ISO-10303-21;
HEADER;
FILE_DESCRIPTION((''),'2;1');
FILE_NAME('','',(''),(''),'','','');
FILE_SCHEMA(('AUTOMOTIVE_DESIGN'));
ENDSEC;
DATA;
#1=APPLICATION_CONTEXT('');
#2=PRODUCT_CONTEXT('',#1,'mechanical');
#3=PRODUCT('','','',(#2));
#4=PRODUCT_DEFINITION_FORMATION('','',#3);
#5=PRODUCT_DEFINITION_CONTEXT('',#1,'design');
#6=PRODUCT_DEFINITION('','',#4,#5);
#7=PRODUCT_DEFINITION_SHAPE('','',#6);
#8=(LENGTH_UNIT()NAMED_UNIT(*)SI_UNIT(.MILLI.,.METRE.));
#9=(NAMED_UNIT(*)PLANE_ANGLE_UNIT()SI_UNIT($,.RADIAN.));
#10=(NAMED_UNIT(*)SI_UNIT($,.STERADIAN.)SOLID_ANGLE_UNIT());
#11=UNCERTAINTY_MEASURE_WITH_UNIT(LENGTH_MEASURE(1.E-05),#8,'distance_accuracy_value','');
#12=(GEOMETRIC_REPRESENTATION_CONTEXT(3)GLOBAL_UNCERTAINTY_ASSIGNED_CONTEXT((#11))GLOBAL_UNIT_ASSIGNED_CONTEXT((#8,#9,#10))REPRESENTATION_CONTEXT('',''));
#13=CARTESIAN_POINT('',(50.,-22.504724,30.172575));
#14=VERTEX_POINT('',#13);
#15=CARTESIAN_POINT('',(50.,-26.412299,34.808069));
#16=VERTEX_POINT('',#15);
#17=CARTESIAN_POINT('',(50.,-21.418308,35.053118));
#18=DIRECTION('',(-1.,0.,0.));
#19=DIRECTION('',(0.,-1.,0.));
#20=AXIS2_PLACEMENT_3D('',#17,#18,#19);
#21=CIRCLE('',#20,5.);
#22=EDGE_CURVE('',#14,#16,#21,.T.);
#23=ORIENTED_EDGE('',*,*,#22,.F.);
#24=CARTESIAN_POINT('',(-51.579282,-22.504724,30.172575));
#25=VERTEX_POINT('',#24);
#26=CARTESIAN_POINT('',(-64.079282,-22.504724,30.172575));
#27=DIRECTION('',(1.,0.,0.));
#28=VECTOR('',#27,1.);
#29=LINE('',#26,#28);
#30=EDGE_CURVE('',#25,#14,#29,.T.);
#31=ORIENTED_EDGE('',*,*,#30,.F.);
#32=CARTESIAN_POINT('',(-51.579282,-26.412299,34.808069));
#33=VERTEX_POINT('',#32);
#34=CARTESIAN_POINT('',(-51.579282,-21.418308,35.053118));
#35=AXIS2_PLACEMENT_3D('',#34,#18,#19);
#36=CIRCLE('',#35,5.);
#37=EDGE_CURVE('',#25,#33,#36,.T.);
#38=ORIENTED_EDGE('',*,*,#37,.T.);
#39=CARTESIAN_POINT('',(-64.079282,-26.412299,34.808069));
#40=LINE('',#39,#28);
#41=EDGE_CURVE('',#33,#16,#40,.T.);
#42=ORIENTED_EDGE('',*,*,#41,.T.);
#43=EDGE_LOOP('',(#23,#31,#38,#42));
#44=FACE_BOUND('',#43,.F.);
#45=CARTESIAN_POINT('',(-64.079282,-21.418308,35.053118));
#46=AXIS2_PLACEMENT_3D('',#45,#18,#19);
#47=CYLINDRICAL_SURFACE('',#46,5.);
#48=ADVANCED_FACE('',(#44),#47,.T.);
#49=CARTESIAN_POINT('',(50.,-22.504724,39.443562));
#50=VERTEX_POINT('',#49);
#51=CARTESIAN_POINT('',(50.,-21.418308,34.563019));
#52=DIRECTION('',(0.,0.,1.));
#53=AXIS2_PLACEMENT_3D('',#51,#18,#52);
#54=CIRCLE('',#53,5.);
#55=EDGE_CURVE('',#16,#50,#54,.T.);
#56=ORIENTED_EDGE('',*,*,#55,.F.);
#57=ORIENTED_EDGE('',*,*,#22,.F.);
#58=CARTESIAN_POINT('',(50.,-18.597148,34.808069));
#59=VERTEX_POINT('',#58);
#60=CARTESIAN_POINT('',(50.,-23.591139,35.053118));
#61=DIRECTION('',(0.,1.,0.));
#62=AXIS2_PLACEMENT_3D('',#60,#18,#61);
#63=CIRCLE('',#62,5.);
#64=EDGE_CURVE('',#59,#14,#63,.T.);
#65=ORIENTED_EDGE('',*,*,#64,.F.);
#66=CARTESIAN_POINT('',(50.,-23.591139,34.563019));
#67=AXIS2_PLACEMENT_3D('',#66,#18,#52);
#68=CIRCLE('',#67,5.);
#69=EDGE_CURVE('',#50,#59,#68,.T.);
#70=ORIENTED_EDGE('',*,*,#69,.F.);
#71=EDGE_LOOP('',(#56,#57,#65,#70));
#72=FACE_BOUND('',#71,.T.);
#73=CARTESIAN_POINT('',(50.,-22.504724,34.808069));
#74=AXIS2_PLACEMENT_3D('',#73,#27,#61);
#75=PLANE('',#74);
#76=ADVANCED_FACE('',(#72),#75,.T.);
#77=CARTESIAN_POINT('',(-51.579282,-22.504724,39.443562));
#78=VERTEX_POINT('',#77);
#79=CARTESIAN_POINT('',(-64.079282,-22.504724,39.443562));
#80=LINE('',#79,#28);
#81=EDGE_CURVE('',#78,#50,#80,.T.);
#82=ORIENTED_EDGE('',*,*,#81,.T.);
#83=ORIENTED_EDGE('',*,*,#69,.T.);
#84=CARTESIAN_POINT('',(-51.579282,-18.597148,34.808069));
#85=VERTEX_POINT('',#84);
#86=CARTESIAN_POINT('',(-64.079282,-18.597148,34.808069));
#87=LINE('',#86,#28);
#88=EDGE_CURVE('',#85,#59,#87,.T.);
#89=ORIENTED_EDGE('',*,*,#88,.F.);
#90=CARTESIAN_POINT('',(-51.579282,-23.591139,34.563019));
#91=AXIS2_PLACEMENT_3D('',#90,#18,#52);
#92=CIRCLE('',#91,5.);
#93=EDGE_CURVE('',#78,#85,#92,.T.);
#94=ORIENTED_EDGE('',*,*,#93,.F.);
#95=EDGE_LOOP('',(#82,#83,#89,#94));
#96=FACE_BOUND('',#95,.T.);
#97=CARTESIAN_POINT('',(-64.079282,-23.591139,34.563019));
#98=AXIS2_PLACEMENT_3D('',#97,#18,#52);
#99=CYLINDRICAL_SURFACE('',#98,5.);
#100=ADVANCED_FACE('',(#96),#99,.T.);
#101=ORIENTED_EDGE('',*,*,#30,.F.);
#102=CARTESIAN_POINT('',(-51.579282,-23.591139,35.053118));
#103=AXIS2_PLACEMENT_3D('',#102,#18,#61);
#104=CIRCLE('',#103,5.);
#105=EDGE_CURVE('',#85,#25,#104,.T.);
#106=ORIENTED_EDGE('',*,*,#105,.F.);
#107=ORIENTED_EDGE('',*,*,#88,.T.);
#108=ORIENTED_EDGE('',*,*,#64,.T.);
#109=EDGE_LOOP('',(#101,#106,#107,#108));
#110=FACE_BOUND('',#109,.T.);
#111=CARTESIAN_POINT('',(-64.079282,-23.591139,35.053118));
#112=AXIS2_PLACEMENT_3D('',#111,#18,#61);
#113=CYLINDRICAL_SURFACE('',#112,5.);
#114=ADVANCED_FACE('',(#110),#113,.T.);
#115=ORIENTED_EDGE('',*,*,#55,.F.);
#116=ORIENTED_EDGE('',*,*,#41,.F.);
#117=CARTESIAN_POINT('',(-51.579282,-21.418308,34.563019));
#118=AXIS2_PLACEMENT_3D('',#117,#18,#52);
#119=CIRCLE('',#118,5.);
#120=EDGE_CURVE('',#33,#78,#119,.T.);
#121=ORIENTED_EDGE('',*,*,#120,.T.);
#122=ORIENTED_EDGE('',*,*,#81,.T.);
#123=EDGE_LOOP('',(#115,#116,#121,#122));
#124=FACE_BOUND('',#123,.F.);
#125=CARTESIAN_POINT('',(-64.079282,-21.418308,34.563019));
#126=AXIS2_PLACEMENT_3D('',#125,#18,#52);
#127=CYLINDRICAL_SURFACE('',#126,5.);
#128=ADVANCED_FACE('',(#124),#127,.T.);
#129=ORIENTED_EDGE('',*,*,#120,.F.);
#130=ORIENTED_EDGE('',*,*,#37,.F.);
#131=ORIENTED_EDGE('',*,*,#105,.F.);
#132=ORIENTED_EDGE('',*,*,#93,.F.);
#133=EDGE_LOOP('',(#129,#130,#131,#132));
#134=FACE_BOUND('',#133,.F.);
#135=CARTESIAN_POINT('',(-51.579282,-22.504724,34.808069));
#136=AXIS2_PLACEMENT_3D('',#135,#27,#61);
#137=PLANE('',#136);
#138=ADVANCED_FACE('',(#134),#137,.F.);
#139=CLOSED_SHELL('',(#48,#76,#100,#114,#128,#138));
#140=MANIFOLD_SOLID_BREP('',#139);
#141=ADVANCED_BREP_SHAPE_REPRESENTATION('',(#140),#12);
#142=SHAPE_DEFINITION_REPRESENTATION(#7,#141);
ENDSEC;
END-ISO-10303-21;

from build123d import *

# Parameters (mm, degrees)
F0_W        = 7.8271683306
F0_H        = 9.5099005848
F2_DEPTH    = 25
F3_DEPTH    = 25
F1_W        = 7.8271683306
F1_H        = 9.5099005848
F4_DEPTH    = 51.5792816877
F3_FACE_W   = 7.8271683306
F3_FACE_H   = 9.5099005848
F4_FACE_W   = 7.8271683306
F4_FACE_H   = 9.5099005848
F6_T1_DEPTH = 126.5792816877


# Not quite as in the source:
# - a fillet or chamfer that OpenCascade refuses, or shapes differently, is made with other operations: its cross-section is extruded or revolved along the edge and cut away or added


with BuildPart() as f2:
    # F0 (on Right) → F2 (new body)
    with BuildSketch(Plane.YZ):
        with Locations((-22.5047236308, 34.8080685362)):
            Rectangle(F0_W, F0_H)
    extrude(amount=F2_DEPTH)

    # F3 (add): a face of the model
    f3_faces = [f2.faces().sort_by_distance(p)[0] for p in [
        (25, -22.5047236308, 34.8080685362),
    ]]
    extrude(f3_faces, amount=F3_DEPTH)

    # F1 (on face) → F4 (join)
    with BuildSketch(Plane.YZ):
        with Locations((-22.5047236308, 34.8080685362)):
            Rectangle(F1_W, F1_H)
    extrude(amount=-F4_DEPTH)

    # F3_face (on face) → F5 section 0
    with BuildSketch(Plane(origin=(50, -22.5047236308, 34.8080685362), x_dir=(0, 1, 0), z_dir=(1, 0, 0))):
        Rectangle(F3_FACE_W, F3_FACE_H)
    # F4_face (on face) → F5 section 1
    with BuildSketch(Plane(origin=(-51.5792816877, -22.5047236308, 34.8080685362), x_dir=(0, 1, 0), z_dir=(-1, 0, 0))):
        Rectangle(F4_FACE_W, F4_FACE_H)
    loft()

    # F6: fillet of radius 5 on 4 edges, made by hand

    # F6_s2 → F6_t1 (cut)
    with BuildSketch(Plane.YZ.offset(-64.0792816877)):
        with BuildLine():
            ThreePointArc((-21.4183077961, 39.5630188286), (-24.9538417021, 38.0985527346), (-26.4183077961, 34.5630188286))
            Line((-26.4183077961, 34.5630188286), (-26.4183077961, 39.5630188286))
            Line((-26.4183077961, 39.5630188286), (-21.4183077961, 39.5630188286))
        make_face()
        with BuildLine():
            ThreePointArc((-23.5911394656, 39.5630188286), (-20.0556055596, 38.0985527346), (-18.5911394656, 34.5630188286))
            Line((-18.5911394656, 34.5630188286), (-18.5911394656, 39.5630188286))
            Line((-18.5911394656, 39.5630188286), (-23.5911394656, 39.5630188286))
        make_face()
        with BuildLine():
            ThreePointArc((-26.4183077961, 35.0531182438), (-24.9538417021, 31.5175843379), (-21.4183077961, 30.0531182438))
            Line((-21.4183077961, 30.0531182438), (-26.4183077961, 30.0531182438))
            Line((-26.4183077961, 30.0531182438), (-26.4183077961, 35.0531182438))
        make_face()
        with BuildLine():
            ThreePointArc((-18.5911394656, 35.0531182438), (-20.0556055596, 31.5175843379), (-23.5911394656, 30.0531182438))
            Line((-23.5911394656, 30.0531182438), (-18.5911394656, 30.0531182438))
            Line((-18.5911394656, 30.0531182438), (-18.5911394656, 35.0531182438))
        make_face()
    extrude(amount=F6_T1_DEPTH, mode=Mode.SUBTRACT)


solid = f2.part
